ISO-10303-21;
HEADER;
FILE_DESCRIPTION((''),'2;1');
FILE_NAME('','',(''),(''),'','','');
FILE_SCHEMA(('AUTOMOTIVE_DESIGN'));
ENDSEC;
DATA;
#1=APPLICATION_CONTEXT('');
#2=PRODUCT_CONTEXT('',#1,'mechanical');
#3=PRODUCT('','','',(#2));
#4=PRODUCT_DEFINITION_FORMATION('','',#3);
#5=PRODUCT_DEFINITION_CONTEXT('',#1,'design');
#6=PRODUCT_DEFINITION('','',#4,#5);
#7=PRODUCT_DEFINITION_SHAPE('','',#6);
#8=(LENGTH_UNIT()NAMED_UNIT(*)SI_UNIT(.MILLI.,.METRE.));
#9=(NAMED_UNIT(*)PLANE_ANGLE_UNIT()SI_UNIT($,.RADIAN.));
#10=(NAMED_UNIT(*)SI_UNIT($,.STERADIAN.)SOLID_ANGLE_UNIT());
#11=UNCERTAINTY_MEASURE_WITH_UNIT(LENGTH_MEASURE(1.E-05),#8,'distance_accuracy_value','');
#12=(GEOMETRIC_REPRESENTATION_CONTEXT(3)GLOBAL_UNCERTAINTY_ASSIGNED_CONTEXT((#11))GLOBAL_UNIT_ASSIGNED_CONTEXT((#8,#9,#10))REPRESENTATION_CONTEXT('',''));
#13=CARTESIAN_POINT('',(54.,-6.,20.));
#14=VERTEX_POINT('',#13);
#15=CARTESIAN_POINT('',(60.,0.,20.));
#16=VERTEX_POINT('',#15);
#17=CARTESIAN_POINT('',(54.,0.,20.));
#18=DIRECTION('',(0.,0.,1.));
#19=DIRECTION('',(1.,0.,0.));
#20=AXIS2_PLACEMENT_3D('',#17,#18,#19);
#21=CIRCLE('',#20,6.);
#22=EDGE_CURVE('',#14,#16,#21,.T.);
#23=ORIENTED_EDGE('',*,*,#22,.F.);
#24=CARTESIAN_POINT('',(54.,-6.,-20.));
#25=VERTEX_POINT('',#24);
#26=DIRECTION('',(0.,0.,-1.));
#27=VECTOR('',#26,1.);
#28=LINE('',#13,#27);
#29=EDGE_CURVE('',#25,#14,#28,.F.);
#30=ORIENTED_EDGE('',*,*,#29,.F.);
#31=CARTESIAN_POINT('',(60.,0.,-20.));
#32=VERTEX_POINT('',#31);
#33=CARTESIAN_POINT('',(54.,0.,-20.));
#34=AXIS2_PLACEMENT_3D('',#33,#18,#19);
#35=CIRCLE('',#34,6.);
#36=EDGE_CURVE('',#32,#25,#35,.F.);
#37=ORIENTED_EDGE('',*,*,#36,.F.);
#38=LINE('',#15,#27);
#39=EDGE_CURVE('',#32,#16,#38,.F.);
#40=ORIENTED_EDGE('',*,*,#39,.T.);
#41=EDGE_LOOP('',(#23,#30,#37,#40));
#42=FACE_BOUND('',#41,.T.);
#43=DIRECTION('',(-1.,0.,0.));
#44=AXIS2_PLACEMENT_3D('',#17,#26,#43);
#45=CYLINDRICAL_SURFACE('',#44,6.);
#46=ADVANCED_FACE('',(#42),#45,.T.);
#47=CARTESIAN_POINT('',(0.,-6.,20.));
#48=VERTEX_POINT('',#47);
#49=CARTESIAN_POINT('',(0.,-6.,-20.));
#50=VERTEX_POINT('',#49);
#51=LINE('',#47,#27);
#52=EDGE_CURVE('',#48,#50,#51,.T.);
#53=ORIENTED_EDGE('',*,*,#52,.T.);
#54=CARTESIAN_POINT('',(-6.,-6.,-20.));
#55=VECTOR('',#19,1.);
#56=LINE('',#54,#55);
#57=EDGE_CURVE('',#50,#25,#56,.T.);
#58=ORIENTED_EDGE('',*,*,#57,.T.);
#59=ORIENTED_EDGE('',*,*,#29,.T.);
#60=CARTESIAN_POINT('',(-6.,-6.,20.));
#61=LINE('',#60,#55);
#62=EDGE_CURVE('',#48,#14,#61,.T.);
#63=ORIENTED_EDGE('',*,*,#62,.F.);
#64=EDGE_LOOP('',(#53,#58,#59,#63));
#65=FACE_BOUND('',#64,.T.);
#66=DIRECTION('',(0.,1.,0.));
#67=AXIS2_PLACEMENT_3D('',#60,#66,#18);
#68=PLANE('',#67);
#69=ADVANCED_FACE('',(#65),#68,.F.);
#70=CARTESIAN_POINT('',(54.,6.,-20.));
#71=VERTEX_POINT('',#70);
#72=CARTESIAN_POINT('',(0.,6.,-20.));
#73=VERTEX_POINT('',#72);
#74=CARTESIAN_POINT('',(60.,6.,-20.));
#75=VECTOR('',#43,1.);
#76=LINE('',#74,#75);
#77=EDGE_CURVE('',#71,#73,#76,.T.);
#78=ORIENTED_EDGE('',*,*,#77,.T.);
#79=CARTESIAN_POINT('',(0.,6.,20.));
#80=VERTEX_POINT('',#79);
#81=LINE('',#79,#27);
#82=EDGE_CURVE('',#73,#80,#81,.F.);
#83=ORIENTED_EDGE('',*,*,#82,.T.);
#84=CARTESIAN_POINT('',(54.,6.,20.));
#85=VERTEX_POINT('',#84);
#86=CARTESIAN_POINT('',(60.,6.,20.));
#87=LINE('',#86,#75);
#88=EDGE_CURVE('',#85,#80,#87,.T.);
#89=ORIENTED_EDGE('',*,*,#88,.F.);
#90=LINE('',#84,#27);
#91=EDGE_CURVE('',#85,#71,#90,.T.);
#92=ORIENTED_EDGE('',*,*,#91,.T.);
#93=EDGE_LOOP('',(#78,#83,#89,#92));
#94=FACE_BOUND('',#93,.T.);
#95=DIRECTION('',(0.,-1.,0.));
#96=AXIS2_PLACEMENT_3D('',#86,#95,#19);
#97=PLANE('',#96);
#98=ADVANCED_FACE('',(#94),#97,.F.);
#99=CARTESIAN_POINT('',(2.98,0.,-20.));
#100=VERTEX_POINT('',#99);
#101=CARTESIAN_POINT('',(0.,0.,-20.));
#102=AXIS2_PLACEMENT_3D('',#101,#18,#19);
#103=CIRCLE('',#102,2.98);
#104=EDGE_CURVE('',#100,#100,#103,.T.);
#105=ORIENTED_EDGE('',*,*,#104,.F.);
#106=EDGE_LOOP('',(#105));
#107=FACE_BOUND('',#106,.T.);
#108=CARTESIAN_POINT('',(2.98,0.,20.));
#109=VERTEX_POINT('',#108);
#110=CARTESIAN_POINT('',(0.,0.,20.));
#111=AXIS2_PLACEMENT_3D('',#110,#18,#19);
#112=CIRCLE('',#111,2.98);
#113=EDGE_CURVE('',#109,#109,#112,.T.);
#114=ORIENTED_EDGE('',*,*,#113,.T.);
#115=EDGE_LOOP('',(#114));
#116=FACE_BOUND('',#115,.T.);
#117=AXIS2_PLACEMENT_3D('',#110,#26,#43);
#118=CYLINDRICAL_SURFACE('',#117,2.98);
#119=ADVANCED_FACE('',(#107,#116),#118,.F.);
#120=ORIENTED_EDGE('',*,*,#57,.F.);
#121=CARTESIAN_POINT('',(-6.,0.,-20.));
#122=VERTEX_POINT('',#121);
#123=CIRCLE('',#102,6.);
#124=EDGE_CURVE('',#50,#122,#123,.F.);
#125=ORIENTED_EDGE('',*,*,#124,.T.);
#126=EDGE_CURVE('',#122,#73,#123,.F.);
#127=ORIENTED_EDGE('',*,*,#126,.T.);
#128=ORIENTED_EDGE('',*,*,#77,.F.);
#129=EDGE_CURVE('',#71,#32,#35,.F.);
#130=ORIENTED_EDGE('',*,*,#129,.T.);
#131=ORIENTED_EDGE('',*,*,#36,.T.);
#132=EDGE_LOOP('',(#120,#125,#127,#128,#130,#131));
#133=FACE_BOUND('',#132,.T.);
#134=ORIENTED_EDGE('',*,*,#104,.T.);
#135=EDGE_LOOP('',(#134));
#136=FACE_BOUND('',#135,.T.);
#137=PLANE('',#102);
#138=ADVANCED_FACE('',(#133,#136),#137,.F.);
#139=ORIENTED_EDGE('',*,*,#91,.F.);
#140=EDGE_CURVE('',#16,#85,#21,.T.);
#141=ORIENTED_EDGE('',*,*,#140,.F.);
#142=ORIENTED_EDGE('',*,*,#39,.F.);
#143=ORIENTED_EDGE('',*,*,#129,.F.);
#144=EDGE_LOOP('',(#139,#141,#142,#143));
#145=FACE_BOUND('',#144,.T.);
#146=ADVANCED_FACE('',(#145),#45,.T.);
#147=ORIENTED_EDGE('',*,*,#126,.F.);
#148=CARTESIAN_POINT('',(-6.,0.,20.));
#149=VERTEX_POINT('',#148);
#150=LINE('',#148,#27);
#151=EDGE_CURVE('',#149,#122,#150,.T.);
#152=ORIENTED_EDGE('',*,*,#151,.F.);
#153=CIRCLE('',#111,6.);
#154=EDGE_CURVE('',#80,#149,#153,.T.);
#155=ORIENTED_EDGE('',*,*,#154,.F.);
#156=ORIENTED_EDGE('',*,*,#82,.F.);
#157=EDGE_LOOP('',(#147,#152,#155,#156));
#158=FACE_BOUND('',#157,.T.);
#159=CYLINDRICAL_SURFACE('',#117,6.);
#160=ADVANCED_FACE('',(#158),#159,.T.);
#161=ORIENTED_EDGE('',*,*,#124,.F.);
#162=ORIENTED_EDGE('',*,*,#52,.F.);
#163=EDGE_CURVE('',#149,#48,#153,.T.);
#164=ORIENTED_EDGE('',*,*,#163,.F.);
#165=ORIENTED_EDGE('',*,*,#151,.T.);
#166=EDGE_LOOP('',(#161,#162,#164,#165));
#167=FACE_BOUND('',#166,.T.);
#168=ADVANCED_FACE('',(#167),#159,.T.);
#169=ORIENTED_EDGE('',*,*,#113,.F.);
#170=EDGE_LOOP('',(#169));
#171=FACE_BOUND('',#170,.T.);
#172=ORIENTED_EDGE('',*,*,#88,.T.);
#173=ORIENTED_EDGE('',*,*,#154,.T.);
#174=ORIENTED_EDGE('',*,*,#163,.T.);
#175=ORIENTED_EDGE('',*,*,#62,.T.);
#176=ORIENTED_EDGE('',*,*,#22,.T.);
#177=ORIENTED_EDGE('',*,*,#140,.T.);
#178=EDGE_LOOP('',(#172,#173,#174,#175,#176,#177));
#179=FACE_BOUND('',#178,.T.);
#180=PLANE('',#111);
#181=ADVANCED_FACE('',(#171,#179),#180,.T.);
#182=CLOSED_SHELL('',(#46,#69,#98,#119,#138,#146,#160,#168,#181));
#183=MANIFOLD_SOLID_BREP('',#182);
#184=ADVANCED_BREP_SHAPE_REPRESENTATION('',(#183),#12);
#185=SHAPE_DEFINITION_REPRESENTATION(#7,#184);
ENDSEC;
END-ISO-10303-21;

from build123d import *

# Parameters (mm, degrees)
SKETCH1_W           = 66
SKETCH1_H           = 12
SKETCH1_R           = 2.98
BOSS_EXTRUDE1_DEPTH = 20
FILLET2_R           = 6


with BuildPart() as part:
    # Sketch1 → Boss-Extrude1 (new, symmetric)
    with BuildSketch(Plane.XY):
        with Locations((27, 0)):
            Rectangle(SKETCH1_W, SKETCH1_H)
        Circle(SKETCH1_R, mode=Mode.SUBTRACT)
    extrude(amount=BOSS_EXTRUDE1_DEPTH, both=True)

    # Fillet2
    fillet2_edges = [part.edges().sort_by_distance(p)[0] for p in [
        (60, -6, 0),
        (60, 6, 0),
        (-6, -6, 0),
        (-6, 6, 0),
    ]]
    fillet(fillet2_edges, radius=FILLET2_R - 0.0001)  # a hair under: the kernel refuses the full size


solid = part.part
